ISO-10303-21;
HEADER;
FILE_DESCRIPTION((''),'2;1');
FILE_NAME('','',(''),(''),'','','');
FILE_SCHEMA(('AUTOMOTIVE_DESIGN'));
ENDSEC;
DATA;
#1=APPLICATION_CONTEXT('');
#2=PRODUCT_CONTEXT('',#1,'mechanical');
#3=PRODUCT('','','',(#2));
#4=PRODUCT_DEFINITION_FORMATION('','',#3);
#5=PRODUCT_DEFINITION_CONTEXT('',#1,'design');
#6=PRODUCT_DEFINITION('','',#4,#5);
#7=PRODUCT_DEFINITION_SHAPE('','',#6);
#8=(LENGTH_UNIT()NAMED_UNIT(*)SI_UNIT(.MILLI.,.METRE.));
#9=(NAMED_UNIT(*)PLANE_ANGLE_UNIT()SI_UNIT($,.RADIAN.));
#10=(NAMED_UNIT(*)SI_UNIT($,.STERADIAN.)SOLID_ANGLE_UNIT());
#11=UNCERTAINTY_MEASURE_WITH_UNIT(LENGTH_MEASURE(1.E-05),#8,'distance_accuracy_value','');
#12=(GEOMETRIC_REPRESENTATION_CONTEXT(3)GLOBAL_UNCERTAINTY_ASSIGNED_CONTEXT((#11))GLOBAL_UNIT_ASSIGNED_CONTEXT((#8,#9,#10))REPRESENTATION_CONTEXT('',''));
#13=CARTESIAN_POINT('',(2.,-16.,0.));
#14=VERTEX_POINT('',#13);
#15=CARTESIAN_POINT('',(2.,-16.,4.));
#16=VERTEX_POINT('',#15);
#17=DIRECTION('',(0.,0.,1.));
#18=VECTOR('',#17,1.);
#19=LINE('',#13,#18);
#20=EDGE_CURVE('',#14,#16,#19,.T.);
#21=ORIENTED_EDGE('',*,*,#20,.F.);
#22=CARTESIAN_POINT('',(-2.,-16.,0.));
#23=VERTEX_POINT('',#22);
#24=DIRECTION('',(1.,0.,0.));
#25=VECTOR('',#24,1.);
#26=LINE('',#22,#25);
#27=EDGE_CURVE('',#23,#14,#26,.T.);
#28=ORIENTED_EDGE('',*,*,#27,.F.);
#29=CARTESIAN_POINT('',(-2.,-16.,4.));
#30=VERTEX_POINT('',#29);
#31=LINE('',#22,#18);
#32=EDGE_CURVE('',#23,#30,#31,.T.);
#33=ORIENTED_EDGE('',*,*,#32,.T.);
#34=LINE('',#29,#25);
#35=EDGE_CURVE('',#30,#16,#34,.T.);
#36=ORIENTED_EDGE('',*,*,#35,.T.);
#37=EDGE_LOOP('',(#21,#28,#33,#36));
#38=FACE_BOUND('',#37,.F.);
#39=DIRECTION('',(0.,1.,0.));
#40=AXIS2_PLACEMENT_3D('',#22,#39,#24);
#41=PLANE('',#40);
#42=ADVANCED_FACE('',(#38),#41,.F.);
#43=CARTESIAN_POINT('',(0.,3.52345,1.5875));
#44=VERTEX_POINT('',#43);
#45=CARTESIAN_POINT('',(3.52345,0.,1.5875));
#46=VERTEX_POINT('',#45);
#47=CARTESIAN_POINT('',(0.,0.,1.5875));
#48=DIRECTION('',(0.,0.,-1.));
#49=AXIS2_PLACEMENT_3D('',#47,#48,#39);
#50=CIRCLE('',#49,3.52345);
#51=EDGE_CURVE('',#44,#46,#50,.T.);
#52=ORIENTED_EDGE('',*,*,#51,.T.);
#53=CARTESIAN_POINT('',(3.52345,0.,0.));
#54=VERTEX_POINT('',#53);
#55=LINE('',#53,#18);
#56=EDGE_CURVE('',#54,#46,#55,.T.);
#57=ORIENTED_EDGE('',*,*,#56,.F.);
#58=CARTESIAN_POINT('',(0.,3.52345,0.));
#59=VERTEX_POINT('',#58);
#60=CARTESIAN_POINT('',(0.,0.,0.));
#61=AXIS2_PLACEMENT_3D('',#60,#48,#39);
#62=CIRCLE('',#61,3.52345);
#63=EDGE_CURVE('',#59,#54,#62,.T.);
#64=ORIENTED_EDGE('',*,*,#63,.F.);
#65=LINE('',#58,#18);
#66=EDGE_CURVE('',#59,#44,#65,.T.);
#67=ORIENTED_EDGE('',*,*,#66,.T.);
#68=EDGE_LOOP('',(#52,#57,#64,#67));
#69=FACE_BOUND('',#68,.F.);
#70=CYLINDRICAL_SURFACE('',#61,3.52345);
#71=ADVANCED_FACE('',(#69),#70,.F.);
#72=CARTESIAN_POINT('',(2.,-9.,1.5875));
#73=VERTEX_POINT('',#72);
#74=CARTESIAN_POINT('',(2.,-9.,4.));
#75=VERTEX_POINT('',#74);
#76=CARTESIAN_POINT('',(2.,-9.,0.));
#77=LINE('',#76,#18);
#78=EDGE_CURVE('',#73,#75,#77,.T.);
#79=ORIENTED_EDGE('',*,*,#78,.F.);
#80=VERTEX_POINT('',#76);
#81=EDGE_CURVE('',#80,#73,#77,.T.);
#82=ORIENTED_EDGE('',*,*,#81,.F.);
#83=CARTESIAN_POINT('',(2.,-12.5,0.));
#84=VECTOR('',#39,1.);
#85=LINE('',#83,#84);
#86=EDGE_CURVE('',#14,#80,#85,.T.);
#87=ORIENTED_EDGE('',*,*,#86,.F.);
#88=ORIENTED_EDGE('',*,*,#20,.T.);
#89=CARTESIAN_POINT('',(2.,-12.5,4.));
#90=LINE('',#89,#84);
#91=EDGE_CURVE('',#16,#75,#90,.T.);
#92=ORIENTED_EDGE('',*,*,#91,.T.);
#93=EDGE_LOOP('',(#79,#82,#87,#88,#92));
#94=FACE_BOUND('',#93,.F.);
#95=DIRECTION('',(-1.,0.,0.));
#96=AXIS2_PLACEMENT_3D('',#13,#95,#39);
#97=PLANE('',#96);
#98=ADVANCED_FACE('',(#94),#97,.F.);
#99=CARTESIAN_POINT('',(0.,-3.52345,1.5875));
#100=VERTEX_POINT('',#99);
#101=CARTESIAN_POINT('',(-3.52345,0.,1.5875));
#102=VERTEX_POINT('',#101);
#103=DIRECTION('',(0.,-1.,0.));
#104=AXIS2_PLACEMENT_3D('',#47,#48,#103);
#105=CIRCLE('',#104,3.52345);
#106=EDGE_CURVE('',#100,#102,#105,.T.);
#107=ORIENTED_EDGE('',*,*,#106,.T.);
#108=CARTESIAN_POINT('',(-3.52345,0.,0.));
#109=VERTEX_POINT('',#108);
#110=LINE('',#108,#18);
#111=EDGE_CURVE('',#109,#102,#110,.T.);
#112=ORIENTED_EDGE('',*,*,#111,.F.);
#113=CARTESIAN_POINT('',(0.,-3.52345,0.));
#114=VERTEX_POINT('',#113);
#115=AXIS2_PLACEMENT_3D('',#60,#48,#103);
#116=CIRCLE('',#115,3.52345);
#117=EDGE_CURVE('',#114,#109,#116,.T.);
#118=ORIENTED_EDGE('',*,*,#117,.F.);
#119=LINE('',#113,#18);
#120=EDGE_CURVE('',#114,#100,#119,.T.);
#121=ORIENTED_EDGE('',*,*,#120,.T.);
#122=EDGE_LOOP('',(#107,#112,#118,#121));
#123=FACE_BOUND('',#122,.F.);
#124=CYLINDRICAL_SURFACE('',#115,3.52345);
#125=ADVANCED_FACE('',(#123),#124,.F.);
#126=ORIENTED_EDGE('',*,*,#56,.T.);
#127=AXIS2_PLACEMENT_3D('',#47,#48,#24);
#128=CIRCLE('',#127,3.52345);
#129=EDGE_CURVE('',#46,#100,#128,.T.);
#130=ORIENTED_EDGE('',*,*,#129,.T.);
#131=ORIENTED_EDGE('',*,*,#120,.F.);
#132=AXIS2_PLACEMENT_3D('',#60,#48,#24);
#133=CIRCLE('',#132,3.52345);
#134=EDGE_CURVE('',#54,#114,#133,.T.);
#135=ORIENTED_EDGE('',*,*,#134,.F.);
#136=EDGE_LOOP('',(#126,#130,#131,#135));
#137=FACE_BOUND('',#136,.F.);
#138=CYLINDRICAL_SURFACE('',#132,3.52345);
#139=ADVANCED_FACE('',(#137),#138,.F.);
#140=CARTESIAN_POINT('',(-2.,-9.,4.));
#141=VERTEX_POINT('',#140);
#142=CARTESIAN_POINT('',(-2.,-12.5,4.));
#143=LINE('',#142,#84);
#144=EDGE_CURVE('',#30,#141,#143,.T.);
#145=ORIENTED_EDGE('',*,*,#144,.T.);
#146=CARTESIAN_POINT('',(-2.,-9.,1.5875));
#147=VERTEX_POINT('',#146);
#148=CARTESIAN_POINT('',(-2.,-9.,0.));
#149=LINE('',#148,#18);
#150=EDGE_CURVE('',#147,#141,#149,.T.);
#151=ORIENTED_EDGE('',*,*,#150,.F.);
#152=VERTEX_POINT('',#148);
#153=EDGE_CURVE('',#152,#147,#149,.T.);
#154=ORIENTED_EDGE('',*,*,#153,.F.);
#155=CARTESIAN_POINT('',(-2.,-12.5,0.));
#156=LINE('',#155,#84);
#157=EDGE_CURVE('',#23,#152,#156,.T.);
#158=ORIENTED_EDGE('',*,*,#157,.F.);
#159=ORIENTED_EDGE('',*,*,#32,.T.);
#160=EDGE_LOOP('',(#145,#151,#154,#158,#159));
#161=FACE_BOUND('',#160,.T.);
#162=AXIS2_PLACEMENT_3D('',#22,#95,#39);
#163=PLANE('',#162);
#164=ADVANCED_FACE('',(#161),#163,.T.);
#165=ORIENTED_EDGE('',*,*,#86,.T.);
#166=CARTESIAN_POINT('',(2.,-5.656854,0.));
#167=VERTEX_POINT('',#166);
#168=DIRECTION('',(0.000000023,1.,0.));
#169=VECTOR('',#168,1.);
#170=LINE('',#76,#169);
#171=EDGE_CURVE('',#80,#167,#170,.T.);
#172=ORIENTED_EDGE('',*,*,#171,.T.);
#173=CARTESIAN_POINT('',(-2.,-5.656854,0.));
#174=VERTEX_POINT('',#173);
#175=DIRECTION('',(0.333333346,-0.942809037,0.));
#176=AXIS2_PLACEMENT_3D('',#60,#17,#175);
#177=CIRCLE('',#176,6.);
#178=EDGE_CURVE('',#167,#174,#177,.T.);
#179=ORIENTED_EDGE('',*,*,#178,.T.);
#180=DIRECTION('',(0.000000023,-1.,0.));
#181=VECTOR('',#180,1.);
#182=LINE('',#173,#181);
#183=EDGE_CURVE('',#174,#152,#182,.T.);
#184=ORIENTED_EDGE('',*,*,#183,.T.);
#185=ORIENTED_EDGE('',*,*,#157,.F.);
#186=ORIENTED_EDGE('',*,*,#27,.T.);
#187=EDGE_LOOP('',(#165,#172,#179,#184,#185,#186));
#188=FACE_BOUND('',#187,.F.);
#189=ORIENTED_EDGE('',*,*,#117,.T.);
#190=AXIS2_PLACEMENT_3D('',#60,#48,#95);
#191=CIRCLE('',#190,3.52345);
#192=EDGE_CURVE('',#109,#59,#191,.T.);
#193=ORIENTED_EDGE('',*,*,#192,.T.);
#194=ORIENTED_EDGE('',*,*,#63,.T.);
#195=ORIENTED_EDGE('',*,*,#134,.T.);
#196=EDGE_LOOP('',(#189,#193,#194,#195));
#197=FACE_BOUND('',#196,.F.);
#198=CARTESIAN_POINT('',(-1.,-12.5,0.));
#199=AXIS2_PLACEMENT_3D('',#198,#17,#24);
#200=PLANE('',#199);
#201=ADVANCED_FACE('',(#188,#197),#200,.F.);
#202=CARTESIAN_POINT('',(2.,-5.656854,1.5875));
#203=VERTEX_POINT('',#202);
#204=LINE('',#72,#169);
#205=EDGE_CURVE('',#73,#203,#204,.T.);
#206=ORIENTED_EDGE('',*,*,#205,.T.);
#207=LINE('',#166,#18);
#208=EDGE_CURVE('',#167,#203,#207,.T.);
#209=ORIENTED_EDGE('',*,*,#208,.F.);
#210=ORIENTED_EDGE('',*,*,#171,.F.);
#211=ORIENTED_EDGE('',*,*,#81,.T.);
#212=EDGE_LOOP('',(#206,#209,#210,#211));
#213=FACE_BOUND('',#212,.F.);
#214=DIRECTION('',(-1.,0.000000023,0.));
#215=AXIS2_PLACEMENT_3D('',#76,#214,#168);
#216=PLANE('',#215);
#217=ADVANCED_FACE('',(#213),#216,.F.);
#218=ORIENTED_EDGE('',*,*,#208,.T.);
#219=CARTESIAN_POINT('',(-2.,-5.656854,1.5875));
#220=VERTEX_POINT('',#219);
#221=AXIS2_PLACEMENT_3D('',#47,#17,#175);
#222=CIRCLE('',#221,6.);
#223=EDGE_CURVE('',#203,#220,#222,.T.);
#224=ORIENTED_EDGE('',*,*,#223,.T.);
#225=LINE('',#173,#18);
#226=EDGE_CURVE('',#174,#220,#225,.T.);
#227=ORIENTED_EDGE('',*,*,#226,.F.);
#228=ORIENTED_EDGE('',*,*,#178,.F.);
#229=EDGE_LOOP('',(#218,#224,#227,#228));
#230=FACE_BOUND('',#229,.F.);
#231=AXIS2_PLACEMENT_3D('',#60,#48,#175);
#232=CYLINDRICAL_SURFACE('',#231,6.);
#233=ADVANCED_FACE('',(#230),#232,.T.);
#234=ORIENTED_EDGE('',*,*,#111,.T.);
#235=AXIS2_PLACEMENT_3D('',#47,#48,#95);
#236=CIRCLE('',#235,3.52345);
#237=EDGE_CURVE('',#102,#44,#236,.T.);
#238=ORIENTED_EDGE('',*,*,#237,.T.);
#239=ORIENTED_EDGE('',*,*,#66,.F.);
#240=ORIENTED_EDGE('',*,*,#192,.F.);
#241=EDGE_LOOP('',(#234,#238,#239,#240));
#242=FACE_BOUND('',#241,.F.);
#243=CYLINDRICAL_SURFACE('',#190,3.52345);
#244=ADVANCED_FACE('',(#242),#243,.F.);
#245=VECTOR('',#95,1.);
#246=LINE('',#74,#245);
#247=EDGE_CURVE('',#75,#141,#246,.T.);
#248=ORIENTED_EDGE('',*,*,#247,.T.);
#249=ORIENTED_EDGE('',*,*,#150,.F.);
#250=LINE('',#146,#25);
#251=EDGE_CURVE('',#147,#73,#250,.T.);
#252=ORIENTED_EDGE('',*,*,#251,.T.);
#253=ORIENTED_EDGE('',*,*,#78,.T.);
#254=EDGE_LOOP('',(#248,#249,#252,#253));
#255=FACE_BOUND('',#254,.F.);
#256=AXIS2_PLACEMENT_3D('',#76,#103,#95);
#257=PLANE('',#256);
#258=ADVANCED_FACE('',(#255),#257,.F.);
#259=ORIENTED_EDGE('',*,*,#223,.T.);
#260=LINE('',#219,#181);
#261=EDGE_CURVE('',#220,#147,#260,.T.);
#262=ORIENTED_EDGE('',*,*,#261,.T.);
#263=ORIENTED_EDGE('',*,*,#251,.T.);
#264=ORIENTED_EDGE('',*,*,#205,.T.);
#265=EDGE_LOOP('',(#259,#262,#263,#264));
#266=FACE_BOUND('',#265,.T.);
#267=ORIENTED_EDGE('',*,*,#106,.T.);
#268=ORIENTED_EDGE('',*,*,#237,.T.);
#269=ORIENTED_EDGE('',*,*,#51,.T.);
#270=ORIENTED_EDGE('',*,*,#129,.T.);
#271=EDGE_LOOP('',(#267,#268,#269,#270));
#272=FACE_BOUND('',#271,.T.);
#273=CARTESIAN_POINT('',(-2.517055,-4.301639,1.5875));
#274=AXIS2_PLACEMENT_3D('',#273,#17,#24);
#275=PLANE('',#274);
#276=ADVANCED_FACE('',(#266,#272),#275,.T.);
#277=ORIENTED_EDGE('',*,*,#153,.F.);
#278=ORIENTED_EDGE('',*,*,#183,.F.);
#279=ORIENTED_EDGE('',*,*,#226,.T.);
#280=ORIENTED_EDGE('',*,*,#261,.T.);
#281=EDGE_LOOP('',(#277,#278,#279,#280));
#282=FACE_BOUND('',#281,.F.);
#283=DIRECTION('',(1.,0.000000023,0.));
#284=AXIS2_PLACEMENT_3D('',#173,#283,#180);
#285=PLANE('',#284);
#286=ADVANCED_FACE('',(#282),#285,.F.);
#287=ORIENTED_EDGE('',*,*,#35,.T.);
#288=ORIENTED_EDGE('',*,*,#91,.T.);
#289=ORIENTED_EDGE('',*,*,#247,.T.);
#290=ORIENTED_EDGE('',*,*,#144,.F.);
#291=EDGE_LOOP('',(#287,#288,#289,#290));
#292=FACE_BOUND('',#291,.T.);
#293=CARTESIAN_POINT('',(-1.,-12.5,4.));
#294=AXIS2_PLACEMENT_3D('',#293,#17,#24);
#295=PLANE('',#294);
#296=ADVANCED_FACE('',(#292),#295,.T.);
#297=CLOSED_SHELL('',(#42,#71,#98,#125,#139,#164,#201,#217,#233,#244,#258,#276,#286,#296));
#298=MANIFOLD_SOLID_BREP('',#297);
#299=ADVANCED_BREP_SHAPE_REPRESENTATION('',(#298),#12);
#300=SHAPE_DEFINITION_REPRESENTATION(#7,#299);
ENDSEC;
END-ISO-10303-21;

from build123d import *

# Parameters (mm, degrees)
F1_DEPTH = 1.5875
F2_W     = 2
F2_H     = 7
F3_DEPTH = 4


# Not quite as in the source:
# - ends of sketch curves that miss each other by under 0.0002 mm in the source are joined


with BuildPart() as f1:
    # F0 (on Top) → F1 (new body)
    with BuildSketch(Plane.XY):
        with BuildLine():
            Line((-3.52345, 0), (-6, 0))
            ThreePointArc((-6, 0), (-4.8989795096, -3.4641015812), (-2.0000000784, -5.6568542218))
            Line((-2.0000000784, -5.6568542218), (-2, -9))
            Line((-2, -9), (0, -9))
            Line((0, -9), (0, -3.52345))
            ThreePointArc((0, -3.52345), (-2.4914553882, -2.4914553882), (-3.52345, 0))
        make_face()
        with BuildLine():
            ThreePointArc((2.0000000784, -5.6568542218), (4.8989795096, -3.4641015812), (6, 0))
            Line((6, 0), (3.52345, 0))
            ThreePointArc((3.52345, 0), (2.4914553882, -2.4914553882), (0, -3.52345))
            Line((0, -3.52345), (0, -9))
            Line((0, -9), (2, -9))
            Line((2, -9), (2.0000000784, -5.6568542218))
        make_face()
        with BuildLine():
            ThreePointArc((6, 0), (4.2426406871, 4.2426406871), (0, 6))
            Line((0, 6), (0, 3.52345))
            ThreePointArc((0, 3.52345), (2.4914553882, 2.4914553882), (3.52345, 0))
            Line((3.52345, 0), (6, 0))
        make_face()
        with BuildLine():
            Line((0, 3.52345), (0, 6))
            ThreePointArc((0, 6), (-4.2426406871, 4.2426406871), (-6, 0))
            Line((-6, 0), (-3.52345, 0))
            ThreePointArc((-3.52345, 0), (-2.4914553882, 2.4914553882), (0, 3.52345))
        make_face()
    extrude(amount=F1_DEPTH)

    # F2 (on Top) → F3 (join)
    with BuildSketch(Plane.XY):
        with Locations((-1, -12.5)):
            Rectangle(F2_W, F2_H)
        with Locations((1, -12.5)):
            Rectangle(F2_W, F2_H)
    extrude(amount=F3_DEPTH)


solid = f1.part
